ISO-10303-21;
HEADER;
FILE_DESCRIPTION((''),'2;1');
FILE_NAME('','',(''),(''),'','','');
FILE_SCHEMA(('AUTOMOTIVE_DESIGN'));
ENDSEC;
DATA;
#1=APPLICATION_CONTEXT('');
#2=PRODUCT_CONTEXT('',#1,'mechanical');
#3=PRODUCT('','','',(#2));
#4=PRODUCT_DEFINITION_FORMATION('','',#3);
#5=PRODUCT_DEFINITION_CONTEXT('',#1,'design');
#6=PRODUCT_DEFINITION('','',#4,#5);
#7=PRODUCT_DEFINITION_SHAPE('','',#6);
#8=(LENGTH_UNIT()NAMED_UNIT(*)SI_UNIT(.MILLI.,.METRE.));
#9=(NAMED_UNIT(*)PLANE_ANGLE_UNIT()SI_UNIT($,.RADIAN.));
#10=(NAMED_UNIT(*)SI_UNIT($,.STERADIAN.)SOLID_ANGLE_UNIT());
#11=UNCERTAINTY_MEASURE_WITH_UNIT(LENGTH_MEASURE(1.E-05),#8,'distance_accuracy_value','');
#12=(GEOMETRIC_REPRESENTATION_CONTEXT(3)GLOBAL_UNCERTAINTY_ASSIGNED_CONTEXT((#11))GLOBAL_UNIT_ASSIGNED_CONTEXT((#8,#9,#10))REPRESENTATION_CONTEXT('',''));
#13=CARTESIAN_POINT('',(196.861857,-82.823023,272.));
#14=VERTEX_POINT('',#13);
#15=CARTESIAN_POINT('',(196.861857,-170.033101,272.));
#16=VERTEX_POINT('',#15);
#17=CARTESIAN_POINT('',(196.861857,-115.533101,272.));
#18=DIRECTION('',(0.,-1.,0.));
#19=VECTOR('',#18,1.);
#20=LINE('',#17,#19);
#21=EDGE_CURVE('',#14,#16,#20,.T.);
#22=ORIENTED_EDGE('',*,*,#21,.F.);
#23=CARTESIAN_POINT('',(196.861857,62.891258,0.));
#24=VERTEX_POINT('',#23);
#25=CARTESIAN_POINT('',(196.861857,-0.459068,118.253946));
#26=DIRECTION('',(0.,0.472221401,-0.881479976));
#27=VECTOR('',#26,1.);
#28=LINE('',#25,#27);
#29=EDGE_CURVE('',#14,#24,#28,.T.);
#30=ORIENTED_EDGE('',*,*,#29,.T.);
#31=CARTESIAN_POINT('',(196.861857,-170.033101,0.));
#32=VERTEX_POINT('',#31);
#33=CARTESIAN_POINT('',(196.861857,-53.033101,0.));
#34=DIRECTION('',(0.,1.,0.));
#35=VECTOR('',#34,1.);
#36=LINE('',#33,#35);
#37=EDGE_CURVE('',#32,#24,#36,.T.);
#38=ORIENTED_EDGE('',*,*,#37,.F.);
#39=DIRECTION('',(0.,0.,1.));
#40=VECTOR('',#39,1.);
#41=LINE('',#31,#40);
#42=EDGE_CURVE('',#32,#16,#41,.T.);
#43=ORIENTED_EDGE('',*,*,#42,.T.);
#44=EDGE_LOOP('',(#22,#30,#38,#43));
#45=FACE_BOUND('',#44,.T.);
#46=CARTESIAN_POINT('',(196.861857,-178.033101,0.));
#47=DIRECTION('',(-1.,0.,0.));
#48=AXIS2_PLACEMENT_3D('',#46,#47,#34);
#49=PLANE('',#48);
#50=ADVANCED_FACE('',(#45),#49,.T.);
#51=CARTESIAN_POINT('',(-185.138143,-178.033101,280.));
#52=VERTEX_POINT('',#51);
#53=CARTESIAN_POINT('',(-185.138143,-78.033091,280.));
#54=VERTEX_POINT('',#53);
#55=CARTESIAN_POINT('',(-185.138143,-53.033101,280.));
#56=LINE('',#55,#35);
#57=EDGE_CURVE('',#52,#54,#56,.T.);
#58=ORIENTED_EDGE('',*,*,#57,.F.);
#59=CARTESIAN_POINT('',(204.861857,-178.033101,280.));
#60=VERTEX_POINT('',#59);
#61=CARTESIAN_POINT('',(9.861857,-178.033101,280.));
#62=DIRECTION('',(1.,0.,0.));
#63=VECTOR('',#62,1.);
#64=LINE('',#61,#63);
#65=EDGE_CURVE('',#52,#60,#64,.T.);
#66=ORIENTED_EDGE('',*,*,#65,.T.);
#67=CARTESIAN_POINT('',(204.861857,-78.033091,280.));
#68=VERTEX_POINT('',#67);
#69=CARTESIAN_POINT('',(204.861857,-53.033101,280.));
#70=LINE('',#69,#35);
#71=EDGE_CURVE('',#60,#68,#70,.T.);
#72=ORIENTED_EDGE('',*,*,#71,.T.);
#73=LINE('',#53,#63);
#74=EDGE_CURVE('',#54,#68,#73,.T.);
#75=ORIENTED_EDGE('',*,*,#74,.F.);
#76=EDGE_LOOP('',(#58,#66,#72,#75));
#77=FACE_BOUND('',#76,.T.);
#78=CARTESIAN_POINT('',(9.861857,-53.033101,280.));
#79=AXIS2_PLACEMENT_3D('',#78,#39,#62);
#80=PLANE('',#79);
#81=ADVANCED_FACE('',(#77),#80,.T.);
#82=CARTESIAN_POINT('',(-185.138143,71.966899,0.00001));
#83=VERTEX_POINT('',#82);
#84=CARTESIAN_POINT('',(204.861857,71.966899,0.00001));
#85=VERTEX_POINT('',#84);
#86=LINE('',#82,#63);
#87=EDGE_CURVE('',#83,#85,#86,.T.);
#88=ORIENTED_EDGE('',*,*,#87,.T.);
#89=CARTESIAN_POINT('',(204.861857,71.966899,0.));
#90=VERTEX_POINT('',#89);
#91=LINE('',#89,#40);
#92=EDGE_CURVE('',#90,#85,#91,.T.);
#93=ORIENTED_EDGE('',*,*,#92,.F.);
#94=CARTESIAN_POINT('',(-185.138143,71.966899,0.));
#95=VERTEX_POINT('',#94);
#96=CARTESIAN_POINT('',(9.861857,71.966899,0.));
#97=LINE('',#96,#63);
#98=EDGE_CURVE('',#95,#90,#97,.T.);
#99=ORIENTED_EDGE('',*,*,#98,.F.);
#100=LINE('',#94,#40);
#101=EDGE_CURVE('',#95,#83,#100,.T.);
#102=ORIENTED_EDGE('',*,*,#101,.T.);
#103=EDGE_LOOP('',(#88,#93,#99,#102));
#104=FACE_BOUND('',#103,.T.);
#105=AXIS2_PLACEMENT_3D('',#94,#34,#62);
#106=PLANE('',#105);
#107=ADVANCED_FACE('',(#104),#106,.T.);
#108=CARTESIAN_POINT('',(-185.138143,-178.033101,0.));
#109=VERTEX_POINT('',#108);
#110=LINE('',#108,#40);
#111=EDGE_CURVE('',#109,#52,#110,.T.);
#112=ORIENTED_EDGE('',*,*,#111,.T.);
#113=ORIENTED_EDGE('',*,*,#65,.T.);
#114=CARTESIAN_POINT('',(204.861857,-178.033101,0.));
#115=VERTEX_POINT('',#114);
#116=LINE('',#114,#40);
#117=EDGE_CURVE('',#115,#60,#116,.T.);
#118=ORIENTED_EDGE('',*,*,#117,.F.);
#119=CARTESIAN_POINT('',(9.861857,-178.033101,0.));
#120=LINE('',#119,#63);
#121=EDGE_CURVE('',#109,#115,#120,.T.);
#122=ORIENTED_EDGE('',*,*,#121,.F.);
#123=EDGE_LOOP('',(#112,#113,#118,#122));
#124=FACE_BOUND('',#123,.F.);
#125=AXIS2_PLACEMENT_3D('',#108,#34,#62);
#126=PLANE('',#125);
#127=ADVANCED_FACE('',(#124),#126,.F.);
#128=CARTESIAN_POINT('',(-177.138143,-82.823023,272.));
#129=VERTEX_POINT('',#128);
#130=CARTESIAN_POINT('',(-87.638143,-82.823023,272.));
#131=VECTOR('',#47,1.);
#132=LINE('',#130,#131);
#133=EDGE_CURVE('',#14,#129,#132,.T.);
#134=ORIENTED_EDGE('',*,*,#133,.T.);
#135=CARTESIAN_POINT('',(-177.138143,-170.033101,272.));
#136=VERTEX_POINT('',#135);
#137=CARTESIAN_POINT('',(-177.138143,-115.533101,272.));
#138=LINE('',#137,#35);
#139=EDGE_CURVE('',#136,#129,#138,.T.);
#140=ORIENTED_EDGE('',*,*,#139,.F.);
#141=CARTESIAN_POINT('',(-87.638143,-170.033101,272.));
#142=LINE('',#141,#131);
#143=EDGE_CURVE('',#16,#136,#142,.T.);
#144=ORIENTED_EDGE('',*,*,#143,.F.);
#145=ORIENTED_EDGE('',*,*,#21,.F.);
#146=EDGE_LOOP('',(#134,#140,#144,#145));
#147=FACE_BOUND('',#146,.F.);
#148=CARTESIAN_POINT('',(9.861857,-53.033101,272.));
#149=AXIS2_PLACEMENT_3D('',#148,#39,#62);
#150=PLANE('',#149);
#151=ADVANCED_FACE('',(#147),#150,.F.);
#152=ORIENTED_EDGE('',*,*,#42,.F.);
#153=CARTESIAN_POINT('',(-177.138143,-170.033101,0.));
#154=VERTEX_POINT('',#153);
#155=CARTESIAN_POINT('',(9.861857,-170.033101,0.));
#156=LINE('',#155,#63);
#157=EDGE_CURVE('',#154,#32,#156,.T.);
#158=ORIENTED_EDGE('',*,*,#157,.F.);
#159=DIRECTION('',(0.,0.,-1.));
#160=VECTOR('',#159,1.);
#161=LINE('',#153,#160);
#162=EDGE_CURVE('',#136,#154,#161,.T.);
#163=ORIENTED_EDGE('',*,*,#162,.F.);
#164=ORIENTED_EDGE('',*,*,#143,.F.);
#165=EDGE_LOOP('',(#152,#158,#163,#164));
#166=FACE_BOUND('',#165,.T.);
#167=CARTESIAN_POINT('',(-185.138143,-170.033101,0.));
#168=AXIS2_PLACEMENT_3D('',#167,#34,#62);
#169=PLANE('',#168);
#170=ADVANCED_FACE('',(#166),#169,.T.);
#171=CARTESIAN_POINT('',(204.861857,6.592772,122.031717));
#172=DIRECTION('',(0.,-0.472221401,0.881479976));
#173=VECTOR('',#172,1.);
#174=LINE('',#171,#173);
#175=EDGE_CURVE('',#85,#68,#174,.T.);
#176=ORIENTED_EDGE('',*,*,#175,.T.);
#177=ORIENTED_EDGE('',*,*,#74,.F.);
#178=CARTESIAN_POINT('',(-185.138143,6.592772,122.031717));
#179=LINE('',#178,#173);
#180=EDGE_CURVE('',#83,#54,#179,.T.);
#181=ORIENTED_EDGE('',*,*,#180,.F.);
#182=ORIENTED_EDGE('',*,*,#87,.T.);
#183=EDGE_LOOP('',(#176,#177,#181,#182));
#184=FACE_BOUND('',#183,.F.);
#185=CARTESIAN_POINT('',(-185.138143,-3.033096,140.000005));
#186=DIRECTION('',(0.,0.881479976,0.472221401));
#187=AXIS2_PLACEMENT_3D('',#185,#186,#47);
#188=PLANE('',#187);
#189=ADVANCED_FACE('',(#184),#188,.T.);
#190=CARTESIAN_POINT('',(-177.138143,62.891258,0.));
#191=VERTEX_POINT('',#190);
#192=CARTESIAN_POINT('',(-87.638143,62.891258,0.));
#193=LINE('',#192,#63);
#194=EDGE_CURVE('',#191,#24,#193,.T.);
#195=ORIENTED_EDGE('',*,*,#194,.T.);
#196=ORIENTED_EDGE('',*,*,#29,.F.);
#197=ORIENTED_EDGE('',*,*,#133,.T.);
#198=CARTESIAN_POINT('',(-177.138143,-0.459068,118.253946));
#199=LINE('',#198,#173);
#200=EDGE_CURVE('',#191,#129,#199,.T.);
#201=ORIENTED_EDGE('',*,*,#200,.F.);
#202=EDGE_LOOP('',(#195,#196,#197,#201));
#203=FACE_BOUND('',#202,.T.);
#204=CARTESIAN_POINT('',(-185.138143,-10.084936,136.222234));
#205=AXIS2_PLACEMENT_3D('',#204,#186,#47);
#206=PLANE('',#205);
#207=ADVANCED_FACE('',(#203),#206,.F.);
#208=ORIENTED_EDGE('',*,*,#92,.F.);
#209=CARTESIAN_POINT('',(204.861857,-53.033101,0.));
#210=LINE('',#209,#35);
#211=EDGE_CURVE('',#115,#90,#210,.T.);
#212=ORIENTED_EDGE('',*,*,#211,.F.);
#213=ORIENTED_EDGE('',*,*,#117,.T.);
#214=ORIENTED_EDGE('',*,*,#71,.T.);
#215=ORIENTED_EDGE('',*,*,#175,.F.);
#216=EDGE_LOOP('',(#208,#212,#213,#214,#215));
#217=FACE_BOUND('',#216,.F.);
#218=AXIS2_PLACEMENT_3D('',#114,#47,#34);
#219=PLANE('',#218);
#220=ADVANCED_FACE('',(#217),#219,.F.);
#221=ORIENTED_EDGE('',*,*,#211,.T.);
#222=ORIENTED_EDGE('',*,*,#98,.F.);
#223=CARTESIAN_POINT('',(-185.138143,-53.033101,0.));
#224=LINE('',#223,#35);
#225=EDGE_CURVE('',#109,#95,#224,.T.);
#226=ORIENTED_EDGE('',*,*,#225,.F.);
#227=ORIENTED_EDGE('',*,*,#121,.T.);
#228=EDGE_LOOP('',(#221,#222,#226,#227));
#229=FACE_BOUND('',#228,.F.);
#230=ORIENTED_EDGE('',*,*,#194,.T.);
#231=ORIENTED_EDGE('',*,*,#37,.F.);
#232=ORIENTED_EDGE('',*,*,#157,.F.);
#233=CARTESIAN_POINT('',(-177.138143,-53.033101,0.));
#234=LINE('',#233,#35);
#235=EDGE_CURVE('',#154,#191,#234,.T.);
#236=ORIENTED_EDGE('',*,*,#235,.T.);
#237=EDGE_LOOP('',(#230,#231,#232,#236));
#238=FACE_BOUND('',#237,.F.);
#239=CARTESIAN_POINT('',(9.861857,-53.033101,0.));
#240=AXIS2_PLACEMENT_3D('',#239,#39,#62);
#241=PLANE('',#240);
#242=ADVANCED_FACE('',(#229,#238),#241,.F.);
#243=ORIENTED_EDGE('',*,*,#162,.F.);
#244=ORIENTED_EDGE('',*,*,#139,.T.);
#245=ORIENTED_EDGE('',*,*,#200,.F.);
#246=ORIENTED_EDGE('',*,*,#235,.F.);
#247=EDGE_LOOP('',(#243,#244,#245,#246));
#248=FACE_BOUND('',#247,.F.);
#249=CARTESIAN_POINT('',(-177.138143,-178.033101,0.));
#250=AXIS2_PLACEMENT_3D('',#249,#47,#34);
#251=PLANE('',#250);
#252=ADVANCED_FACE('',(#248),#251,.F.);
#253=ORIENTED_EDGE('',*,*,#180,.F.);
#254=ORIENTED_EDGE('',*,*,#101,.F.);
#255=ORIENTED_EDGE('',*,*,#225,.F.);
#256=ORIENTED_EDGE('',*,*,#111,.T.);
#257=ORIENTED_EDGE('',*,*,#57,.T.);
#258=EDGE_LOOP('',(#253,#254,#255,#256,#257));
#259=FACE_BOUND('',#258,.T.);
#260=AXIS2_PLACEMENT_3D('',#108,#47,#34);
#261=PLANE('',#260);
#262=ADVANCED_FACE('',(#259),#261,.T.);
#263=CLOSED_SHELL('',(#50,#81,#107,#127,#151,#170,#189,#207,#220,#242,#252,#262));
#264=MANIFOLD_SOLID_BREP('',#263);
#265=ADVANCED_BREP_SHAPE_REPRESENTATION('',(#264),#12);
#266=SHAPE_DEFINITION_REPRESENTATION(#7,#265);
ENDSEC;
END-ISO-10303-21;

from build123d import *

# Parameters (mm, degrees)
F4_W     = 390
F4_H     = 250
F5_DEPTH = 280
F6_SIZE2 = 149.99999
F6_SIZE  = 279.99999
F7_T     = 8


# Not quite as in the source:
# - a fillet or chamfer is up to 0.001 mm smaller than in the source, because OpenCascade refuses the exact size
# - a shell that OpenCascade refuses in one call is made with other operations: the cavity is built on its own and cut out


with BuildPart() as f5:
    # F4 (on Top) → F5 (new body)
    with BuildSketch(Plane.XY):
        with Locations((9.861856699, -53.0331014672)):
            Rectangle(F4_W, F4_H)
    extrude(amount=F5_DEPTH)

    # F6 (size 280 and 150 in the source; OpenCascade refuses exactly that, so slightly less here)
    f6_edges = [f5.edges().sort_by_distance(p)[0] for p in [
        (9.861857, 71.966899, 280),
    ]]
    f6_side = f5.faces().sort_by_distance((9.861857, 71.966899, 140))[0]
    chamfer(f6_edges, length=F6_SIZE, length2=F6_SIZE2, reference=f6_side)

    # F7: shell of thickness 8, made by hand


with BuildPart() as f7_core1:
    # F7_t2: copy of F5
    add(f5.part)

    # the walls: a layer under each face that stays
    f7_faces = [f7_core1.faces().sort_by_distance(p)[0] for p in [
        (-185.138143301, -53.0331014672, 140),
        (9.861856699, 71.9668985328, 5e-06),
        (9.861856699, -3.0330964672, 140.000005),
        (9.861856699, -128.0330964672, 280),
        (9.861856699, -178.0331014672, 140),
        (204.861856699, -53.0331014672, 140),
    ]]
    thicken(f7_faces, amount=-F7_T, mode=Mode.SUBTRACT)


with BuildPart() as f5_1:
    add(f5.part)

    # what is left inside the walls is the cavity
    f7_cavity = [f7_core1.part.solids().sort_by_distance(p)[0] for p in [
        (9.861857, 14.249313, 90.628889),
    ]]
    add(f7_cavity, mode=Mode.SUBTRACT)


solid = f5_1.part
